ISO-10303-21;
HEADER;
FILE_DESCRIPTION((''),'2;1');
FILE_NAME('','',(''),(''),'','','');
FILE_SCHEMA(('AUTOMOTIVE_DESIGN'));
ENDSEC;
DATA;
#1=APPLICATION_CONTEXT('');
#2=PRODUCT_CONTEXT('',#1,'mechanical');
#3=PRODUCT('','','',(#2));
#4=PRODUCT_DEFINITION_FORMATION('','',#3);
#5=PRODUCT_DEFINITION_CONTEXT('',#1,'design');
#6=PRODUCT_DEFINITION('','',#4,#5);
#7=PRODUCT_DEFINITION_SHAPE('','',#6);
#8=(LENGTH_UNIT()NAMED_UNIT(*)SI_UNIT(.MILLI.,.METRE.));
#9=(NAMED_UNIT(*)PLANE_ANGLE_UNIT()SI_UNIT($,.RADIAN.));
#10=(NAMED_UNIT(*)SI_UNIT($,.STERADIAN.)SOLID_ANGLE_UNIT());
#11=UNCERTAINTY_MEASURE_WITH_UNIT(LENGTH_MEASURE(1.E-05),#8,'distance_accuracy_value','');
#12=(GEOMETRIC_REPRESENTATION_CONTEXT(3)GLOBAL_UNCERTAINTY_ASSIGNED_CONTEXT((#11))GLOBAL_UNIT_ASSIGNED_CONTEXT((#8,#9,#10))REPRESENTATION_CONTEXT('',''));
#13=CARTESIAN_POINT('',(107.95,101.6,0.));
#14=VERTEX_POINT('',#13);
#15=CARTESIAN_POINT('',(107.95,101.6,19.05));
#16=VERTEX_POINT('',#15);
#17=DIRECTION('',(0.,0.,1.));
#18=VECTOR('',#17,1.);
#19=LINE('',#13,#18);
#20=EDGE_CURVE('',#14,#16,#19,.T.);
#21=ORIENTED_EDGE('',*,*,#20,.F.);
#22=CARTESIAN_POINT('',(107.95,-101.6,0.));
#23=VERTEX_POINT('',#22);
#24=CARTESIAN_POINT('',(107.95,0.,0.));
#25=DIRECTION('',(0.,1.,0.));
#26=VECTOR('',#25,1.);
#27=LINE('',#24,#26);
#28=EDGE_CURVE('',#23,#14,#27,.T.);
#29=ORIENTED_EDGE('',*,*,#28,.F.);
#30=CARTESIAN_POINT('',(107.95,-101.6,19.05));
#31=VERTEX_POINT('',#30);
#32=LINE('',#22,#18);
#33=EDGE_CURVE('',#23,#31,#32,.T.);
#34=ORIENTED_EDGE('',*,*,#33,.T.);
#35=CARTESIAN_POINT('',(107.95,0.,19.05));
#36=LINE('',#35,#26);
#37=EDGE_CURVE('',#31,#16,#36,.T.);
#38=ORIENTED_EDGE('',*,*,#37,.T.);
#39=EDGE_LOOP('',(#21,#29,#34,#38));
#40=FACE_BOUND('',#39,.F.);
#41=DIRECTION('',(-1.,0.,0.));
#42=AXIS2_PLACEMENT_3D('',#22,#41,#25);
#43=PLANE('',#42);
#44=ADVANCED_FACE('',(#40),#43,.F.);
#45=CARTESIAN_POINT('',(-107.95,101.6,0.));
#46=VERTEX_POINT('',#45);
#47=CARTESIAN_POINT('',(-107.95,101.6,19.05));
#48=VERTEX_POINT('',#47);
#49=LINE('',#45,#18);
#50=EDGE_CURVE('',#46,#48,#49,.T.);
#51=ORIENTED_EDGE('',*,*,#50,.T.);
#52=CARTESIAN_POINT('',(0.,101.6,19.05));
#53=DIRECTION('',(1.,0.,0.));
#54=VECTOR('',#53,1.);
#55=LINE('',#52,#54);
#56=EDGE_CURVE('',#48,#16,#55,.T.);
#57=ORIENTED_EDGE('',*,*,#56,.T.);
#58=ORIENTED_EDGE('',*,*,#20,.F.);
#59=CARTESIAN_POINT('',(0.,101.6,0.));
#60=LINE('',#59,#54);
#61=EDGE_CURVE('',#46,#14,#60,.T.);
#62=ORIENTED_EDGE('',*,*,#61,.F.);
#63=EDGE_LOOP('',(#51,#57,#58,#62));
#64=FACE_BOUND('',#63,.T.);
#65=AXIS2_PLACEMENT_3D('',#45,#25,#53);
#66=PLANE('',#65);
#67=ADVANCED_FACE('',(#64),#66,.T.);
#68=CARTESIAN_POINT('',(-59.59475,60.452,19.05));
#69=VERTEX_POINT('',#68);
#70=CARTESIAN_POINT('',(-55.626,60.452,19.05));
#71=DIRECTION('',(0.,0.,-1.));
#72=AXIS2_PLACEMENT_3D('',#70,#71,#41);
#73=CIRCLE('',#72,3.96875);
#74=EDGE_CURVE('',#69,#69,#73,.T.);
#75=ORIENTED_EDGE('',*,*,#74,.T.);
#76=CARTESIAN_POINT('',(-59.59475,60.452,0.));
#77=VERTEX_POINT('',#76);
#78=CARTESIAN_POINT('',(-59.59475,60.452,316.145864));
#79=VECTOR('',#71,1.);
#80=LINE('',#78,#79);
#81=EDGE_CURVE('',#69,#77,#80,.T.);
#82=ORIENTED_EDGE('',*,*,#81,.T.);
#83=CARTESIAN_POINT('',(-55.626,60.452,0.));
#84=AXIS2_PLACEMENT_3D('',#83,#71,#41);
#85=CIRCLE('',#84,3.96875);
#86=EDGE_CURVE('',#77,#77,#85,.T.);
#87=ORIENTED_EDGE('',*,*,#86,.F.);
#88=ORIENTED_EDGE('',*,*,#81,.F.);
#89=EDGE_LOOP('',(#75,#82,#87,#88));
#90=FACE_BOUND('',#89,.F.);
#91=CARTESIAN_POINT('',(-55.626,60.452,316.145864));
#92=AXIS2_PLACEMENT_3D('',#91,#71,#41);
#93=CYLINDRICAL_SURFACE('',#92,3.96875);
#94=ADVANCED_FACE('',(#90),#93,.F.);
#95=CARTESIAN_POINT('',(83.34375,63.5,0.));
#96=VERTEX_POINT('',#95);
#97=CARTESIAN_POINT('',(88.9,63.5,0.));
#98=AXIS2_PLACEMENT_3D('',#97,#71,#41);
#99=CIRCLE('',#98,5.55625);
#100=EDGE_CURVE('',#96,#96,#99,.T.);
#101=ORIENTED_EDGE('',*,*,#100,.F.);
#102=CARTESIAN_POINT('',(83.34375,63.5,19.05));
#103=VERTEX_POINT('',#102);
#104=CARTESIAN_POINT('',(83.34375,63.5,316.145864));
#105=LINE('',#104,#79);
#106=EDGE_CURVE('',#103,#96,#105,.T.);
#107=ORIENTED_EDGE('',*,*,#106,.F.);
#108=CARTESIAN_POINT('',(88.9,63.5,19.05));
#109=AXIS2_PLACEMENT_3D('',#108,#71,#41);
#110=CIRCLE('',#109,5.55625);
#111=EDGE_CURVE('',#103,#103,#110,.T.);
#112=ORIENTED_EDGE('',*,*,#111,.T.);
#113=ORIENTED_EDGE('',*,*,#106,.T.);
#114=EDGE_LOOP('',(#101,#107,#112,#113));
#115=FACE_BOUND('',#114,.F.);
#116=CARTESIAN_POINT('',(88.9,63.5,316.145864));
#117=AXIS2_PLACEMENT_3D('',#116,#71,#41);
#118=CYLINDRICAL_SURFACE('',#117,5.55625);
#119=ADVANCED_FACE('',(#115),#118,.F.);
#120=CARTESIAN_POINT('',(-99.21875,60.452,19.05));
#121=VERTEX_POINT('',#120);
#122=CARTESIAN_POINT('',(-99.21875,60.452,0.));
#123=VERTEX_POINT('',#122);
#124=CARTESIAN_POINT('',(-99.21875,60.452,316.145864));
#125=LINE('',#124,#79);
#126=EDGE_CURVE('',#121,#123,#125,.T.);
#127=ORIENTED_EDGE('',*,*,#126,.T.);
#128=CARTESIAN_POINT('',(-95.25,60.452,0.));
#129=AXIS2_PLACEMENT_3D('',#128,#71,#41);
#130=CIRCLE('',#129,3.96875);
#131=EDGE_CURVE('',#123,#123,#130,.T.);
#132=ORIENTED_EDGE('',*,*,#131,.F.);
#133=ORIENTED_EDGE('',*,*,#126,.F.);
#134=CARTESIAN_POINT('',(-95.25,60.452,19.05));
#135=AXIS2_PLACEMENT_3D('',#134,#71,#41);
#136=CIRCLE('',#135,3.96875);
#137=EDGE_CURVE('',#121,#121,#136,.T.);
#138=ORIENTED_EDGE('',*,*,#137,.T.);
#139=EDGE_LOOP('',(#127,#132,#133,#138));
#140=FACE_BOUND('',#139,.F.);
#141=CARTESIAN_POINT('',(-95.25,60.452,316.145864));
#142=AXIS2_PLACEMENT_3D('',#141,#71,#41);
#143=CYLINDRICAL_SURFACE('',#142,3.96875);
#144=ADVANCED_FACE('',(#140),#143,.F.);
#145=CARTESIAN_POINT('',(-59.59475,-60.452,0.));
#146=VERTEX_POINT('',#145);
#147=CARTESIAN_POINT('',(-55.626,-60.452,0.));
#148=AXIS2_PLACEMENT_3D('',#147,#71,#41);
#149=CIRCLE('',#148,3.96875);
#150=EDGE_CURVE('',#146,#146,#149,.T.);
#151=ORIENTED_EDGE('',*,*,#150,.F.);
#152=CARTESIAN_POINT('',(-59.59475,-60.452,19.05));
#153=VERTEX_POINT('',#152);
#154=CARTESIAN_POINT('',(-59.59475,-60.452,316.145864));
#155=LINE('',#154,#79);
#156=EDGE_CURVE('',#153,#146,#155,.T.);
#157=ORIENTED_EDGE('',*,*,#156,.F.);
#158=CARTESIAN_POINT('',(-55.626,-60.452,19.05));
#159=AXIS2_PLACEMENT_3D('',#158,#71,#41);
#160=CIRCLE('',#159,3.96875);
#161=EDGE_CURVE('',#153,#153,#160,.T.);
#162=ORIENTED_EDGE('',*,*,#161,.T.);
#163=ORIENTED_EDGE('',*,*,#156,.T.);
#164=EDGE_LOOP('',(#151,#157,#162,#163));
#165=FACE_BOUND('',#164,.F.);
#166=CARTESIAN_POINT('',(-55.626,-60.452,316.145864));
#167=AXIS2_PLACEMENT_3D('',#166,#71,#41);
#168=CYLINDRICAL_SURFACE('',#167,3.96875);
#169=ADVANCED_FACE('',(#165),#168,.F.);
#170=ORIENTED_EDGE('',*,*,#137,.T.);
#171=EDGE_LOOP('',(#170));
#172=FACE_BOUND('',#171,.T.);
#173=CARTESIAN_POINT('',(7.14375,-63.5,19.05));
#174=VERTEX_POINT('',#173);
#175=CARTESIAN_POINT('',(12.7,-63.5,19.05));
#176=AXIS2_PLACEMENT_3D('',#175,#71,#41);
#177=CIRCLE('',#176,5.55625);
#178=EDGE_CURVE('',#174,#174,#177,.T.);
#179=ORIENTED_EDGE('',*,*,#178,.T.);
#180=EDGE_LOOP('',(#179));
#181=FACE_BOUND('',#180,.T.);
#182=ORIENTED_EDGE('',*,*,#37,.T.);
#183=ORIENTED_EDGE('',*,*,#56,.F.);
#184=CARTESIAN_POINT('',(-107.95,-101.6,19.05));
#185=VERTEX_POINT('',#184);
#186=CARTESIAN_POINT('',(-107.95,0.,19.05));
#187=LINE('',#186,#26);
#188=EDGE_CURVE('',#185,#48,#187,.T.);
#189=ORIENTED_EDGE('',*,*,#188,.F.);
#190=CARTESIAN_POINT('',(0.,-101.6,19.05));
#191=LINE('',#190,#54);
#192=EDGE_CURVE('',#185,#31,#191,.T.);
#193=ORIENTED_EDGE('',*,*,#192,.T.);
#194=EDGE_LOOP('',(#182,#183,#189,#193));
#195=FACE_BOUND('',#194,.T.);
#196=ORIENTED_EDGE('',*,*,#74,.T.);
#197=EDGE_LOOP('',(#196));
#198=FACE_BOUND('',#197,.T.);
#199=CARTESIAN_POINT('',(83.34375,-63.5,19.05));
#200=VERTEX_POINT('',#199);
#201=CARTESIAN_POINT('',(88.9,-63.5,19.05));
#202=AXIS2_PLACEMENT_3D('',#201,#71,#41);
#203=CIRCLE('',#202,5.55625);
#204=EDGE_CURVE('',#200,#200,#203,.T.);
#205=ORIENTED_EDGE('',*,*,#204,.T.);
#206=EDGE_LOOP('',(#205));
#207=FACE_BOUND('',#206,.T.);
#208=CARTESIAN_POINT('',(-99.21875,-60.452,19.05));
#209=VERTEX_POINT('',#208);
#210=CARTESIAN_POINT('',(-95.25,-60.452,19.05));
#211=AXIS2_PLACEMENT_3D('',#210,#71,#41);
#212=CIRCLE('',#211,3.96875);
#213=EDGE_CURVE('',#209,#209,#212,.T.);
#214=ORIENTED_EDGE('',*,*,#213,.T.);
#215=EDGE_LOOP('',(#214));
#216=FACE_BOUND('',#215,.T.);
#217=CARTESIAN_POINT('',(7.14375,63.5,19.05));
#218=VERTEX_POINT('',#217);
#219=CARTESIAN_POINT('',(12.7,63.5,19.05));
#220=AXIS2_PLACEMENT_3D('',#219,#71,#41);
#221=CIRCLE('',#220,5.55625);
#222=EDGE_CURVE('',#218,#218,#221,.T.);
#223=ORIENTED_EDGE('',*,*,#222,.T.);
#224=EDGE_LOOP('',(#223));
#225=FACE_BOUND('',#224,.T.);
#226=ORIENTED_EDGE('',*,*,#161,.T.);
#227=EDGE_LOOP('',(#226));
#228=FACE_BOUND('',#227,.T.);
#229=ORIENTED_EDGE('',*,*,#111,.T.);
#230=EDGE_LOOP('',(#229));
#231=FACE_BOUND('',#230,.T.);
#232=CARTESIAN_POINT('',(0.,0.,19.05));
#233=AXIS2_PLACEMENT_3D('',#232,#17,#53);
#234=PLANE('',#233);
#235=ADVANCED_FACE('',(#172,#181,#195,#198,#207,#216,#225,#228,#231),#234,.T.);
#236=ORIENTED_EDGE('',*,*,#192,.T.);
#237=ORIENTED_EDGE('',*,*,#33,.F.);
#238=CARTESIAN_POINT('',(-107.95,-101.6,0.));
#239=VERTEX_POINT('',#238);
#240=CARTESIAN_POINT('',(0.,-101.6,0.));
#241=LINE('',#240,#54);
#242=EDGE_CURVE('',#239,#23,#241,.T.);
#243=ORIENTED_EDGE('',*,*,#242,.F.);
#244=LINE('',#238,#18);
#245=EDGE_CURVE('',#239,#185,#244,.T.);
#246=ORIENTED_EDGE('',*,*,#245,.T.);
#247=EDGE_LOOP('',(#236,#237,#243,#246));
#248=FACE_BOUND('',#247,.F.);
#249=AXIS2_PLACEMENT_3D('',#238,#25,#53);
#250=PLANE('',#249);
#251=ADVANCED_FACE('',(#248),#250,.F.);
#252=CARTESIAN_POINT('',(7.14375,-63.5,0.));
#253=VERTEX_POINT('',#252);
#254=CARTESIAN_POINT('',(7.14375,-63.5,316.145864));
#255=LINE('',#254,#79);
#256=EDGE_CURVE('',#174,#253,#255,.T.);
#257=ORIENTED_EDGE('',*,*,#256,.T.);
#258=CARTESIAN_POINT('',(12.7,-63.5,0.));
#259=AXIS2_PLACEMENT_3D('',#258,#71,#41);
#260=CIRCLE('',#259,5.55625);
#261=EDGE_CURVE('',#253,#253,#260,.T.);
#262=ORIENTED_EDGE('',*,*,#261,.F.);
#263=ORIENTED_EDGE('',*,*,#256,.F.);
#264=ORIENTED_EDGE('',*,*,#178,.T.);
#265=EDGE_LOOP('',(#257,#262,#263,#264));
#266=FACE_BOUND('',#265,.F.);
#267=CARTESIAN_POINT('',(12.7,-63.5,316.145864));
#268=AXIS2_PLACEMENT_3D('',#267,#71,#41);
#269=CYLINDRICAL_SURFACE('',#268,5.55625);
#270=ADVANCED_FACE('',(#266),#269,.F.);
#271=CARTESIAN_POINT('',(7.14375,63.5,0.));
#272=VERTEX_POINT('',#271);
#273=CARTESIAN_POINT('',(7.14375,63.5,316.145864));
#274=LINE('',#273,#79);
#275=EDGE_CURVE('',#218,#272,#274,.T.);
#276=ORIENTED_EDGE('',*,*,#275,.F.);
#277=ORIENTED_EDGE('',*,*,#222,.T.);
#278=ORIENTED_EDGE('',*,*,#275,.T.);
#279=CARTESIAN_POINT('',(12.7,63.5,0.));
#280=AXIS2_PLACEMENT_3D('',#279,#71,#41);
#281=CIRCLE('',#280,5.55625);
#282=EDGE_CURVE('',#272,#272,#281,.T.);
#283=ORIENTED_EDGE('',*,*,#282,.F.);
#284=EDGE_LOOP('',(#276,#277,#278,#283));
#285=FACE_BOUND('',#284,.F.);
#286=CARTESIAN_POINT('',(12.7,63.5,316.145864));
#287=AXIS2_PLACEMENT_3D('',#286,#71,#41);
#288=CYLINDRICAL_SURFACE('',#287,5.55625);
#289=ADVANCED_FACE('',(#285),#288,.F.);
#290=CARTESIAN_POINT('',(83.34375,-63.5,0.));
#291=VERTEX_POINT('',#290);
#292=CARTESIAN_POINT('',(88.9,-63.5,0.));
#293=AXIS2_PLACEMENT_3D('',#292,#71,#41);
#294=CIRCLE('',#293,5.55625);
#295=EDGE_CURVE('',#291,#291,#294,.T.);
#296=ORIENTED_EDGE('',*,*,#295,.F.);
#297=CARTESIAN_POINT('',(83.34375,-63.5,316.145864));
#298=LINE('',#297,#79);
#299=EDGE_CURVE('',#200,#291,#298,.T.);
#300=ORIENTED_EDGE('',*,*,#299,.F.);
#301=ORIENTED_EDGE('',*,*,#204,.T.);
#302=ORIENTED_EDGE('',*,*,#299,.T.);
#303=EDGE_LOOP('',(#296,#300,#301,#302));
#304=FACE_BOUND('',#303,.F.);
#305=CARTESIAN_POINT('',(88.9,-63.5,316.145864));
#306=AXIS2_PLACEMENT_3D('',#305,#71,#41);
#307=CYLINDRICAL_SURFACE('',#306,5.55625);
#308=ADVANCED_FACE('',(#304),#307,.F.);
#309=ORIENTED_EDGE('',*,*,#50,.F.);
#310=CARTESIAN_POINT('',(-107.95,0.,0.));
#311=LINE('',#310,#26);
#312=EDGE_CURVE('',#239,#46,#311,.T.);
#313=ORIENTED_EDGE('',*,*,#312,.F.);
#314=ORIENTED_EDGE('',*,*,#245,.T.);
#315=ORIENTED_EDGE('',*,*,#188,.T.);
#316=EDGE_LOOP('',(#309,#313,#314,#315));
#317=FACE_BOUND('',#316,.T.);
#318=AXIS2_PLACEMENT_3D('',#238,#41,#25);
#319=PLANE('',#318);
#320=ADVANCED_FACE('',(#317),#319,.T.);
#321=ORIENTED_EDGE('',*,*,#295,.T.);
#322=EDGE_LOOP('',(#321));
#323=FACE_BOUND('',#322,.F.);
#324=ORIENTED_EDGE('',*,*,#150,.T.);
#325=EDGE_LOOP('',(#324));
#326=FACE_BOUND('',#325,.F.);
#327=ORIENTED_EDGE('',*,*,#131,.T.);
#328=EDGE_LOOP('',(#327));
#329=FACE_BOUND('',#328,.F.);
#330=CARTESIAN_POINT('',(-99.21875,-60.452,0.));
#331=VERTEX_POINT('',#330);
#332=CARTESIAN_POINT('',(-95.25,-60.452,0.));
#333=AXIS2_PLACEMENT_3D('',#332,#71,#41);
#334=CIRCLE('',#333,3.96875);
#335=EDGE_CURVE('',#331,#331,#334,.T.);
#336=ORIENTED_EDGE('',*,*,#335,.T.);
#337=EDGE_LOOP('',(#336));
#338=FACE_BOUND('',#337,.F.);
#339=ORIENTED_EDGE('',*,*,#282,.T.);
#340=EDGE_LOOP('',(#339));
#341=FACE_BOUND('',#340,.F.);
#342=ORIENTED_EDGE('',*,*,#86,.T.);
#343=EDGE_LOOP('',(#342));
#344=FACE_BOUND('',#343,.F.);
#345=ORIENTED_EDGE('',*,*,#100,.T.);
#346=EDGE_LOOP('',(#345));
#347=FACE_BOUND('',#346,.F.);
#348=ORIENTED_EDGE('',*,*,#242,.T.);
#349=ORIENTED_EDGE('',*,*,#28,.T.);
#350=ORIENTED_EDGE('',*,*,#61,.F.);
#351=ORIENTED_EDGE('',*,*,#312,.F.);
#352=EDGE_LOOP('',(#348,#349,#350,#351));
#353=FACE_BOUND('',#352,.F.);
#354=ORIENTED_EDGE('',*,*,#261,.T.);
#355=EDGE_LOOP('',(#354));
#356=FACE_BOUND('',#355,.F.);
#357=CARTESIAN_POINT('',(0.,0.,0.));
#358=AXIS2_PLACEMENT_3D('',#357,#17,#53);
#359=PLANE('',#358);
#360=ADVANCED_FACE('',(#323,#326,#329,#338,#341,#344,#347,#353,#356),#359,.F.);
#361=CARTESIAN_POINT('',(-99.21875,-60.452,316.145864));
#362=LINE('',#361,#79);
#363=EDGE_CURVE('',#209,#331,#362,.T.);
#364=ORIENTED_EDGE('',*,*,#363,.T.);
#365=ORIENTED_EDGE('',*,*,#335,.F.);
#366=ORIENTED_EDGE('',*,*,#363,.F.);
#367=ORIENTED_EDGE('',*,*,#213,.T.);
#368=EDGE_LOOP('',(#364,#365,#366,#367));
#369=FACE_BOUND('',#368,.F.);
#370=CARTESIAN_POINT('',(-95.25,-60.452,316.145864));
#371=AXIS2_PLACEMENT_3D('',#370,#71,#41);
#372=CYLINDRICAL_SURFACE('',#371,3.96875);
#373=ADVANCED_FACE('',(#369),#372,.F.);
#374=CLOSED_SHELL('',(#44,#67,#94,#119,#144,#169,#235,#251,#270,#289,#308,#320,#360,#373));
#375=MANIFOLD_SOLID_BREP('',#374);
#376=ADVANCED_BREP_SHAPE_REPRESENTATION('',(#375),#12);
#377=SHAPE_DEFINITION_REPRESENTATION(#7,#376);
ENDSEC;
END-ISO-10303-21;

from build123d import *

# Parameters (mm, degrees)
F0_W     = 215.9
F0_H     = 203.2
F1_DEPTH = 19.05
F3_D     = 7.9375
F4_D     = 11.1125


# Not quite as in the source:
# - a length typed as a fraction of an inch, garbled in the dataset ("3 / 203.2 mm" for 3/8 in), is restored


with BuildPart() as f1:
    # F0 (on Top) → F1 (new body)
    with BuildSketch(Plane.XY):
        Rectangle(F0_W, F0_H)
    extrude(amount=F1_DEPTH)

    # F3 (through all)
    with Locations(Plane.XY.offset(19.05)):
        with Locations((-95.25, 60.452), (-55.626, 60.452), (-95.25, -60.452), (-55.626, -60.452)):
            Hole(F3_D / 2)

    # F4 (through all)
    with Locations(Plane.XY.offset(19.05)):
        with Locations((12.7, 63.5), (88.9, 63.5), (12.7, -63.5), (88.9, -63.5)):
            Hole(F4_D / 2)


solid = f1.part
